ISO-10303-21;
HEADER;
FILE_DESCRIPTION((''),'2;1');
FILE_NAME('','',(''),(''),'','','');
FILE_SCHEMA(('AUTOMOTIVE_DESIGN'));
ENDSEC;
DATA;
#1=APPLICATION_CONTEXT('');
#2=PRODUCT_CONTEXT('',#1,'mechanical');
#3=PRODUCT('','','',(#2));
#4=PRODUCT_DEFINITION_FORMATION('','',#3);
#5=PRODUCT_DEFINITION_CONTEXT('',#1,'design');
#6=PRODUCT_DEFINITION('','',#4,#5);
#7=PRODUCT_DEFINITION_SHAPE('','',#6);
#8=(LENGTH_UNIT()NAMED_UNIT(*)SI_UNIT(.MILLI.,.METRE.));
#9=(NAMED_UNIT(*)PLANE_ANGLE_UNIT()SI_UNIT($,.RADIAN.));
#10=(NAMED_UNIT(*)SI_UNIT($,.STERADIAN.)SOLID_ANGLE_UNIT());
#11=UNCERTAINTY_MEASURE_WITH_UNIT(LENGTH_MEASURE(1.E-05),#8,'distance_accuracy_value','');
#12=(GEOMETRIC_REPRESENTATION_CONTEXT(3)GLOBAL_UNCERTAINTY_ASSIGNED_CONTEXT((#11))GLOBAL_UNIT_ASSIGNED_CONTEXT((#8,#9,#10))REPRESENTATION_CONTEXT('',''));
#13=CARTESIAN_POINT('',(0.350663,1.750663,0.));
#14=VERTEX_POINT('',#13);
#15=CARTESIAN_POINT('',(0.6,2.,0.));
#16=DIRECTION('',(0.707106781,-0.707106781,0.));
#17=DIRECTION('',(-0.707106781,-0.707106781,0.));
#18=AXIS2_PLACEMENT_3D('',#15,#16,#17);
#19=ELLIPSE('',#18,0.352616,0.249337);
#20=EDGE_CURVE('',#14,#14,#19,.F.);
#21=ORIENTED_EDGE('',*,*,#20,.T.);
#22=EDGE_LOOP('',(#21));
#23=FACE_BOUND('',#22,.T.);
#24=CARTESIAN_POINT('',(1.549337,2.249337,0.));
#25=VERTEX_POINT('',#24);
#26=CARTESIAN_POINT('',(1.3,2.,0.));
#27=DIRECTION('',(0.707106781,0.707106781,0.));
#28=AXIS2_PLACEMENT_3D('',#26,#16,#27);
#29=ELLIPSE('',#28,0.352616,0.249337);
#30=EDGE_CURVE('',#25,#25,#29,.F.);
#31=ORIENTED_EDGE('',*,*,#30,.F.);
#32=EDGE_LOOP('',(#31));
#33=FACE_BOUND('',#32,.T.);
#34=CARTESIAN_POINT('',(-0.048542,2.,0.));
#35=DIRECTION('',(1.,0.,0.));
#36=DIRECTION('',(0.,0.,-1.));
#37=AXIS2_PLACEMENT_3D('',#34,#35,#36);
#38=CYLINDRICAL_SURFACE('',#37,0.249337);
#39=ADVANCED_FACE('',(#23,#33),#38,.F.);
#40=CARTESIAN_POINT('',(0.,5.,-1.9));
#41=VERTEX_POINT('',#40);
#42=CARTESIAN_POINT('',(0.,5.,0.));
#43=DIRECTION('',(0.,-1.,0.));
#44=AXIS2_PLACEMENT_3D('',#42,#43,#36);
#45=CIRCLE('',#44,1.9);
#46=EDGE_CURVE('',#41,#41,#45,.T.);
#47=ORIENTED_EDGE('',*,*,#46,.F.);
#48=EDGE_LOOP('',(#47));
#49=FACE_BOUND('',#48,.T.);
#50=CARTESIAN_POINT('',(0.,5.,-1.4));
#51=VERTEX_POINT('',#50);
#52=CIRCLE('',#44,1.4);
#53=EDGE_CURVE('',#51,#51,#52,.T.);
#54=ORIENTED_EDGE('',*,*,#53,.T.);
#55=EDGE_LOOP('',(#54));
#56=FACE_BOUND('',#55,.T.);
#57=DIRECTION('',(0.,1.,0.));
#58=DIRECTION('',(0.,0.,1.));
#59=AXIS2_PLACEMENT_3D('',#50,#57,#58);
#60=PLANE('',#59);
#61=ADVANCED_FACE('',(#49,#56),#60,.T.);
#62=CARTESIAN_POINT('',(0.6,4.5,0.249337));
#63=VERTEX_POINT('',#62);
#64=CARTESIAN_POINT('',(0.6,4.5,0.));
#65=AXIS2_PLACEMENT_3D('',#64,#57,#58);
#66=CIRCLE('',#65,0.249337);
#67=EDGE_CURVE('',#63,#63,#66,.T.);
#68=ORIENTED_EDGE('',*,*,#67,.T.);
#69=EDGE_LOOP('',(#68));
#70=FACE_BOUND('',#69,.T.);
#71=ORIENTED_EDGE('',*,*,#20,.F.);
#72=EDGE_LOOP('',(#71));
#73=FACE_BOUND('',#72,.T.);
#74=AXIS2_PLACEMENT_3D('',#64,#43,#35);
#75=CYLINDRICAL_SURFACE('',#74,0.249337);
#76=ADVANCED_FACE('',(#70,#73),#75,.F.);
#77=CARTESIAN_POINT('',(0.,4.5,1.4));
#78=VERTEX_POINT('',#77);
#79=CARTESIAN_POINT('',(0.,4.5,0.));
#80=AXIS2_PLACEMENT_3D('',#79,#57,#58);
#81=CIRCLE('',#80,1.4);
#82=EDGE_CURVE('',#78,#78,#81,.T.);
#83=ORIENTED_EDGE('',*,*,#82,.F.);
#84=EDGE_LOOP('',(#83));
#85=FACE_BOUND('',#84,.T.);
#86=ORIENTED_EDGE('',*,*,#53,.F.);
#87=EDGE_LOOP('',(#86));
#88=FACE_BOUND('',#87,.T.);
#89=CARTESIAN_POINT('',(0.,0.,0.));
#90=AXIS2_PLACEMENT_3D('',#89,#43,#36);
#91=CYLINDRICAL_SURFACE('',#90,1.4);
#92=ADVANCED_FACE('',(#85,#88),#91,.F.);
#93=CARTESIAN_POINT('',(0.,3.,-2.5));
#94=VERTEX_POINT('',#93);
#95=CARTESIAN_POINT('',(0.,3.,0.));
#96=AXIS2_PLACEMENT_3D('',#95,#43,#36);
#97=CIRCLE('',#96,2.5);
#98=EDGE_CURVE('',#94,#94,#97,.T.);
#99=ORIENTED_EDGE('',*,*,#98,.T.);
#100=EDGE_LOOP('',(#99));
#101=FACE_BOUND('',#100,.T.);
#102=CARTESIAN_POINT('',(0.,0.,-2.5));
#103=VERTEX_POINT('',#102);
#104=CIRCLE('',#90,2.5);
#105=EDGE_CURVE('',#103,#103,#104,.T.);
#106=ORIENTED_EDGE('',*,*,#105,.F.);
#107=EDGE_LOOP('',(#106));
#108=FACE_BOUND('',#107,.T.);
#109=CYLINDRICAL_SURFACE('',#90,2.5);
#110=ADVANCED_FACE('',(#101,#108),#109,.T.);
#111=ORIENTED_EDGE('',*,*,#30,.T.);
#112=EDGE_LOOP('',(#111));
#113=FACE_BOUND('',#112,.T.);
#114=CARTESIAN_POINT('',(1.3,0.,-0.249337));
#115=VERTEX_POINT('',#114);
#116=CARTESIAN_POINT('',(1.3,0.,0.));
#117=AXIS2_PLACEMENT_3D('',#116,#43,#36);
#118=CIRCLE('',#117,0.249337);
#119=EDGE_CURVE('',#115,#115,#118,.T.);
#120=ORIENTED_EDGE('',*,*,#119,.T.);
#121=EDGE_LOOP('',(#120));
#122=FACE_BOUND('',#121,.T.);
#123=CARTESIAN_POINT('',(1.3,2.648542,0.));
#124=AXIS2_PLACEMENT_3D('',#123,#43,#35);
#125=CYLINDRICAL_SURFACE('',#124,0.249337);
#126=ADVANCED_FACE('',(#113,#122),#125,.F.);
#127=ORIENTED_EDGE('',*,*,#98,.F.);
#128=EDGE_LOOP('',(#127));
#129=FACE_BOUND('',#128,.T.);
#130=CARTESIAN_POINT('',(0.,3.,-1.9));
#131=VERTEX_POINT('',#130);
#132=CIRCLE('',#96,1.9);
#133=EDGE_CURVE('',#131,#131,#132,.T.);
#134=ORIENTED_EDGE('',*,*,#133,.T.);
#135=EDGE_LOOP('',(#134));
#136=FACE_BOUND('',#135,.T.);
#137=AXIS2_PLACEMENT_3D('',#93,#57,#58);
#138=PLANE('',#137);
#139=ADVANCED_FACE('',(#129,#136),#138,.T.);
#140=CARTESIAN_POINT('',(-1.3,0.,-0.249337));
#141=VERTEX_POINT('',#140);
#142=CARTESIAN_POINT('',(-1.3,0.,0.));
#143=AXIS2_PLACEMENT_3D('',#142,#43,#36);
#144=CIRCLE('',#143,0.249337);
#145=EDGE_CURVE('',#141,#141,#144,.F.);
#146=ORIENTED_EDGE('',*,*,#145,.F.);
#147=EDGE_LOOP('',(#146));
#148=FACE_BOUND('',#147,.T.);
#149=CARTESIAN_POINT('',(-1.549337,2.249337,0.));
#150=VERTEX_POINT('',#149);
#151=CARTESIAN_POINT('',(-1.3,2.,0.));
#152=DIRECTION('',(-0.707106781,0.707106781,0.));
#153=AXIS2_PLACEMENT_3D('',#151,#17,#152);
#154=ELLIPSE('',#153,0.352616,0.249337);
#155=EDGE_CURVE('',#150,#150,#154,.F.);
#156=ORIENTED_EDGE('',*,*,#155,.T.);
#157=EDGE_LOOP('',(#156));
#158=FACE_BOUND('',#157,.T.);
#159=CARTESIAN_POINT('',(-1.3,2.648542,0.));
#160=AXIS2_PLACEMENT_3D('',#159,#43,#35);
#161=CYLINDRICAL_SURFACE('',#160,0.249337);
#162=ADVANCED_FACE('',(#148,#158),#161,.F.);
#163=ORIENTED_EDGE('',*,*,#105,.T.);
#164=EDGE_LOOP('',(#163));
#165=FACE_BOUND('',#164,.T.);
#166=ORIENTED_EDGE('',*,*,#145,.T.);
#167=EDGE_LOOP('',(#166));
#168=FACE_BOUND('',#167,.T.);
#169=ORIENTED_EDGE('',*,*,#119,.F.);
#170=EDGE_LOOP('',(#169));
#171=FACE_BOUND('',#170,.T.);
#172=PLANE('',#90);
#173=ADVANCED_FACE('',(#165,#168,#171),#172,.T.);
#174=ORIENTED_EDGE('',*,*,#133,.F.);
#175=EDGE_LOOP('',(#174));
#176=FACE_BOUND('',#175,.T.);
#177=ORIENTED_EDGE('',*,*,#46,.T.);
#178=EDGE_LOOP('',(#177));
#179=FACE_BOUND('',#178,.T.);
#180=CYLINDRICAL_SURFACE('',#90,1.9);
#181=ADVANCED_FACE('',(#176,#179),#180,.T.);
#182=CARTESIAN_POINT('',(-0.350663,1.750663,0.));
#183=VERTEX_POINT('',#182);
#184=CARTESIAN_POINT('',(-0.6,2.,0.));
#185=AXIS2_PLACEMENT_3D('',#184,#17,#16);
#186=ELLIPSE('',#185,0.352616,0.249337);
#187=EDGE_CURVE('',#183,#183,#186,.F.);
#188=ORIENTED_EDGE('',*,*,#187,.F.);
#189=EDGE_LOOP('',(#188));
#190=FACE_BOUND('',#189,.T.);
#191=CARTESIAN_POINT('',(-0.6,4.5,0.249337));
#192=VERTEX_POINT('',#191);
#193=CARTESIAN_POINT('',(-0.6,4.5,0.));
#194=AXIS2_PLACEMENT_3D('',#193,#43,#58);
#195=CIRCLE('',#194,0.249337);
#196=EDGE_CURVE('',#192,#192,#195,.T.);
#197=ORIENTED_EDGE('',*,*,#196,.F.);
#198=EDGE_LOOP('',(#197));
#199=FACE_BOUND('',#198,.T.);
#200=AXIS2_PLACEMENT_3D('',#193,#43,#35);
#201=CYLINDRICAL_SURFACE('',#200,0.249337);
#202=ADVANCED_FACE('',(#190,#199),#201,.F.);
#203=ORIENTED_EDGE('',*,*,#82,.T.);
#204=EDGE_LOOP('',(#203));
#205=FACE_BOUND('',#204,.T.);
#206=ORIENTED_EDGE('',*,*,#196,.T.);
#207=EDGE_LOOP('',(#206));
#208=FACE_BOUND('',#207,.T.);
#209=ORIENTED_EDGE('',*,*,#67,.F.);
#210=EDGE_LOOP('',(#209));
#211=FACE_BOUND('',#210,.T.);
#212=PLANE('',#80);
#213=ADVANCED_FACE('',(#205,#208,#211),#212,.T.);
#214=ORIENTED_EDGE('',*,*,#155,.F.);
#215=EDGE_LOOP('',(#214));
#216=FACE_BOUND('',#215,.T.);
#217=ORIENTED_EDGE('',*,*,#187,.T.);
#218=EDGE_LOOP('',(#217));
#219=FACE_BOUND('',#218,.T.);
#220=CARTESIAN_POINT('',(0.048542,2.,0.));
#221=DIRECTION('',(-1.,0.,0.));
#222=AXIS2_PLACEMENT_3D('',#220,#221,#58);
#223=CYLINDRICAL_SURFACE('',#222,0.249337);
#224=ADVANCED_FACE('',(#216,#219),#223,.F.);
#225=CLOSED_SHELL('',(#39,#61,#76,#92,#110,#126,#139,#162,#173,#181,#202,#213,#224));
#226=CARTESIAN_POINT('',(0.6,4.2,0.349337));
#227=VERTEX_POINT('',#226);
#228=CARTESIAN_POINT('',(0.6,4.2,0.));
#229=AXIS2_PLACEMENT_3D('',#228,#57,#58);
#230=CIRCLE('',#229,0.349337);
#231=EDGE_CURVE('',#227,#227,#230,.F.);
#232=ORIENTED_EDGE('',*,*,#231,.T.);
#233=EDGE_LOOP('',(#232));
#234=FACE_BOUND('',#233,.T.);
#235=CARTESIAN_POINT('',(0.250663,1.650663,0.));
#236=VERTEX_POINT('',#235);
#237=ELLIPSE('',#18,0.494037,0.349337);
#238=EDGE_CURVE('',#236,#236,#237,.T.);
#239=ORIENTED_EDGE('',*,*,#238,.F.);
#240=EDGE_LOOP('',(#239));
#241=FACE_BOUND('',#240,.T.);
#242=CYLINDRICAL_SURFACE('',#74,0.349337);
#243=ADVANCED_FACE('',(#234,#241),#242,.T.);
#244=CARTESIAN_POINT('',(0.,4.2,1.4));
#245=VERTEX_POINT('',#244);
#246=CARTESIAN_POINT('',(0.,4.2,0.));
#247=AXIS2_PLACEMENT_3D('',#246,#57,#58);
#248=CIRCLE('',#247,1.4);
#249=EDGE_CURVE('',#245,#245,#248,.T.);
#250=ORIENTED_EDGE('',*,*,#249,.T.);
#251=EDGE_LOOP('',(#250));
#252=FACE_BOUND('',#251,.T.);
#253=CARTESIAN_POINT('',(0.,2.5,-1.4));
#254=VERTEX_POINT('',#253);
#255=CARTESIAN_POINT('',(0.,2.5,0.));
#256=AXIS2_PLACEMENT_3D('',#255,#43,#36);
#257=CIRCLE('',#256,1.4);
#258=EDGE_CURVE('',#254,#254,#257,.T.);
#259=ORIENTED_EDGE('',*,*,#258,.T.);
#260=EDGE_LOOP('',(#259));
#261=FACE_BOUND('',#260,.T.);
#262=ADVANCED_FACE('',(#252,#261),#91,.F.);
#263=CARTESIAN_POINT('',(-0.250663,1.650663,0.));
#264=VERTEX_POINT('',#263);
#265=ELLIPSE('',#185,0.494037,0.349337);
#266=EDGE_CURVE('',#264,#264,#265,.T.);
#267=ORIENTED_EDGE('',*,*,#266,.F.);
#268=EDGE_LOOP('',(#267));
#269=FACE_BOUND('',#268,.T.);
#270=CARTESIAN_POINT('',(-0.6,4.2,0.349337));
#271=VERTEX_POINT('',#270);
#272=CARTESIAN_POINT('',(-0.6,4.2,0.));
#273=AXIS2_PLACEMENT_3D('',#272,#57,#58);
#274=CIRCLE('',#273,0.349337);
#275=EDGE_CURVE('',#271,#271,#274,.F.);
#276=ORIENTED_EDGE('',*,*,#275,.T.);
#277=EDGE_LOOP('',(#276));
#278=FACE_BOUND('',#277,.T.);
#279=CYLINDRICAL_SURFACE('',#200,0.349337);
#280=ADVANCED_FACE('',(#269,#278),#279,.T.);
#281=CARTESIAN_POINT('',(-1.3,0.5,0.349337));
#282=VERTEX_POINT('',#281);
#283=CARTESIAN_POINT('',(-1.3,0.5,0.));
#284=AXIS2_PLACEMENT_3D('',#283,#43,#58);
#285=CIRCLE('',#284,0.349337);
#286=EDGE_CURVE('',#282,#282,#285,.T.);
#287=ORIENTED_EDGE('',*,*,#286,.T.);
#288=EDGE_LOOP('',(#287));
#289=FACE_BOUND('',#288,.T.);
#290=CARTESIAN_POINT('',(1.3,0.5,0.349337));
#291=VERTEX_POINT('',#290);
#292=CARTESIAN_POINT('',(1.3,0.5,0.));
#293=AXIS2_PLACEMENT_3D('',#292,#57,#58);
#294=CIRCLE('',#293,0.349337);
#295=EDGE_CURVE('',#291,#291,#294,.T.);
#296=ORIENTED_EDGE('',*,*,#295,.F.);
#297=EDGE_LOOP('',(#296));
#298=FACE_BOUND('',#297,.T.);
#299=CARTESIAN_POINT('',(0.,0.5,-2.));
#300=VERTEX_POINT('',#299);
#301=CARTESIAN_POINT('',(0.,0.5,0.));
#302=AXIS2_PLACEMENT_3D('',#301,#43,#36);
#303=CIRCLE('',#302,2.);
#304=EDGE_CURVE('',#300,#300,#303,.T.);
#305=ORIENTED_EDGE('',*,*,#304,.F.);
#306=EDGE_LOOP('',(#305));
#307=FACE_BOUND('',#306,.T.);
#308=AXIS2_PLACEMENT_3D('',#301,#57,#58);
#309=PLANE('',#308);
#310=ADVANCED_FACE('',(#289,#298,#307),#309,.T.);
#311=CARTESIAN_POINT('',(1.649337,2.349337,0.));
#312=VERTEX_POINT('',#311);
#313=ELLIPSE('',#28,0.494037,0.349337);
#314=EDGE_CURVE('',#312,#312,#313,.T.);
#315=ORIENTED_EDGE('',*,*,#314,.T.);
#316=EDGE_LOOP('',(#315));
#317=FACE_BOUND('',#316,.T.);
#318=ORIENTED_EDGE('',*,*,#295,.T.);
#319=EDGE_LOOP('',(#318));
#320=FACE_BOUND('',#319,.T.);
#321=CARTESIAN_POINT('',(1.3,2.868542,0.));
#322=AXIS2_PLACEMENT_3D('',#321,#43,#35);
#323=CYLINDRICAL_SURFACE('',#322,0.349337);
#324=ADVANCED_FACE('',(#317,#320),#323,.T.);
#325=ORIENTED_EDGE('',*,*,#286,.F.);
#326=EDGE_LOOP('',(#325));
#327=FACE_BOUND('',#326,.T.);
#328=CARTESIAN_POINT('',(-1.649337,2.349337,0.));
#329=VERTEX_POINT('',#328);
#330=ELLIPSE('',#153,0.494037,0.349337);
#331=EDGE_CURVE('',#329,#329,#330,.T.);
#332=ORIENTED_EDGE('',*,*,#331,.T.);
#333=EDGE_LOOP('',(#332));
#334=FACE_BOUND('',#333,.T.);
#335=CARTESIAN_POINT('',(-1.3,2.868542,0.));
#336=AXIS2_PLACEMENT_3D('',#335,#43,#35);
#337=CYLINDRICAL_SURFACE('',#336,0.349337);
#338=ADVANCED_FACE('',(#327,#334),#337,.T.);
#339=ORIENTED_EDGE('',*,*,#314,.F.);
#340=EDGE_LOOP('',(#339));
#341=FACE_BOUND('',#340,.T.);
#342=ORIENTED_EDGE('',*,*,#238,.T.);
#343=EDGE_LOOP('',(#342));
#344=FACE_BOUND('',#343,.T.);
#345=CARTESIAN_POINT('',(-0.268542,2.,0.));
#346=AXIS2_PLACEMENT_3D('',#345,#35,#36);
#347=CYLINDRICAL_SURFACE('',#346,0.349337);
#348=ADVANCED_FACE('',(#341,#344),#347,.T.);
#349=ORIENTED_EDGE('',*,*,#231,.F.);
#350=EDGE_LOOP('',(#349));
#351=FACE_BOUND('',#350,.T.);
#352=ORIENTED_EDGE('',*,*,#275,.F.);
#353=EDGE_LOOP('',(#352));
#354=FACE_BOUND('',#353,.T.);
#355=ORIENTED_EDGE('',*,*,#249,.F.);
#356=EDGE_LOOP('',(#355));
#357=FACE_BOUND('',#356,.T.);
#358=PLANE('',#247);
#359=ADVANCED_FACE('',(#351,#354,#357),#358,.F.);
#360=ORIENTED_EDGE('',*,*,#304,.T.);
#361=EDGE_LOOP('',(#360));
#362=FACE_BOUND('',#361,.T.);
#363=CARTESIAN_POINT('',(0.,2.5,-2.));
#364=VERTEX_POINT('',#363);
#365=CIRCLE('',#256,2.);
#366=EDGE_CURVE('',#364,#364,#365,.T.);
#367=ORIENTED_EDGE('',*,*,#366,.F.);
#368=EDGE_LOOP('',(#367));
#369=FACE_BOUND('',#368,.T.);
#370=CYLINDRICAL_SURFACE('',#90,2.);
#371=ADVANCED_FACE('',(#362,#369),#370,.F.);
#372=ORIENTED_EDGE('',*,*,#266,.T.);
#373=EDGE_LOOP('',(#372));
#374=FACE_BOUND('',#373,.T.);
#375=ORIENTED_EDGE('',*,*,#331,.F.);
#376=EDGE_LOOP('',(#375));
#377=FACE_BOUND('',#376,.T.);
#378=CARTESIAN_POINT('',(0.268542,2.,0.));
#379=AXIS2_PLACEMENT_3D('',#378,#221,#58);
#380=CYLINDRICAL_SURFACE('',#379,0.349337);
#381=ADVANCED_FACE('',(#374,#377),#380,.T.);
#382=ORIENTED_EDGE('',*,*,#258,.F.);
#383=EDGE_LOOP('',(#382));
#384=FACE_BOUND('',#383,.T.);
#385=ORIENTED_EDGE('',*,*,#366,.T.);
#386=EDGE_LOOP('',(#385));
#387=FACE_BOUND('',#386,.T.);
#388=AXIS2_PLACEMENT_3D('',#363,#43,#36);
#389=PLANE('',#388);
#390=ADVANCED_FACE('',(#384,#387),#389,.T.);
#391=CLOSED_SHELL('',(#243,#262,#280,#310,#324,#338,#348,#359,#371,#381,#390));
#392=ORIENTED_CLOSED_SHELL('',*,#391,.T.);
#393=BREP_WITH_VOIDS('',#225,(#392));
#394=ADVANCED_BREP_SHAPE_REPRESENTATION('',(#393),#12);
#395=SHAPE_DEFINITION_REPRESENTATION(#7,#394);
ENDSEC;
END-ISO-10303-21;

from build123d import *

# Parameters (mm, degrees)
BOSS_EXTRUDE1_START = -0.3
SKETCH3_R           = 1.4
BOSS_EXTRUDE1_DEPTH = 0.3
SKETCH4_R           = 0.349337209
SKETCH4_R_2         = 0.249337209
CUT_EXTRUDE6_START  = -0.7
SKETCH8_R           = 0.249337209
CUT_EXTRUDE6_DEPTH  = 0.7
CUT_EXTRUDE7_START  = -0.3
SKETCH4_5_R         = 0.249337209
CUT_EXTRUDE7_DEPTH  = 0.3


with BuildPart() as part:
    # Sketch2 → Revolve1 (revolve)
    with BuildSketch(Plane(origin=(0, 0, 0), x_dir=(0, 0, -1), z_dir=(1, 0, 0))):
        Polygon((0, 0), (2.5, 0), (2.5, 3), (1.9, 3), (1.9, 5), (1.4, 5), (1.4, 2.5), (2, 2.5), (2, 0.5), (0, 0.5), align=None)
    revolve(axis=Axis((0, 0, 0), (0, 1, 0)))

    # Sketch3 → Boss-Extrude1 (add)
    with BuildSketch(Plane(origin=(0, 4.5, 0), x_dir=(1, 0, 0), z_dir=(0, 1, 0)).offset(BOSS_EXTRUDE1_START)):
        Circle(SKETCH3_R)
    extrude(amount=BOSS_EXTRUDE1_DEPTH)

    # Sweep2: sweep along a path in Sketch5
    with BuildLine(Plane.XY) as sweep2_path:
        Line((0.6, 4.5), (0.6, 2))
        Line((0.6, 2), (1.3, 2))
        Line((1.3, 2), (1.3, 0.5))
    # Sketch4 → Sweep2 (sweep)
    with BuildSketch(Plane(origin=(0, 4.5, 0), x_dir=(1, 0, 0), z_dir=(0, 1, 0))):
        with Locations((0.6, 0)):
            Circle(SKETCH4_R)
        with Locations((0.6, 0)):
            Circle(SKETCH4_R_2, mode=Mode.SUBTRACT)
    sweep2 = sweep(path=sweep2_path.line, transition=Transition.RIGHT)

    # Sketch8 → Cut-Extrude6 (cut)
    with BuildSketch(Plane(origin=(0, 0.5, 0), x_dir=(1, 0, 0), z_dir=(0, 1, 0)).offset(CUT_EXTRUDE6_START)):
        with Locations((1.3, 0)):
            Circle(SKETCH8_R)
    cut_extrude6 = extrude(amount=CUT_EXTRUDE6_DEPTH, mode=Mode.SUBTRACT)

    # Sketch4<5> → Cut-Extrude7 (cut)
    with BuildSketch(Plane(origin=(0, 4.5, 0), x_dir=(1, 0, 0), z_dir=(0, 1, 0)).offset(CUT_EXTRUDE7_START)):
        with Locations((0.6, 0)):
            Circle(SKETCH4_5_R)
    cut_extrude7 = extrude(amount=CUT_EXTRUDE7_DEPTH, mode=Mode.SUBTRACT)

    # Mirror1: Sweep2, Cut-Extrude6, Cut-Extrude7 across plane
    add(sweep2.mirror(Plane(origin=(0, 0, 0), x_dir=(0, 0, 1), z_dir=(1, 0, 0))))
    add(cut_extrude6.mirror(Plane(origin=(0, 0, 0), x_dir=(0, 0, 1), z_dir=(1, 0, 0))), mode=Mode.SUBTRACT)
    add(cut_extrude7.mirror(Plane(origin=(0, 0, 0), x_dir=(0, 0, 1), z_dir=(1, 0, 0))), mode=Mode.SUBTRACT)


solid = part.part
